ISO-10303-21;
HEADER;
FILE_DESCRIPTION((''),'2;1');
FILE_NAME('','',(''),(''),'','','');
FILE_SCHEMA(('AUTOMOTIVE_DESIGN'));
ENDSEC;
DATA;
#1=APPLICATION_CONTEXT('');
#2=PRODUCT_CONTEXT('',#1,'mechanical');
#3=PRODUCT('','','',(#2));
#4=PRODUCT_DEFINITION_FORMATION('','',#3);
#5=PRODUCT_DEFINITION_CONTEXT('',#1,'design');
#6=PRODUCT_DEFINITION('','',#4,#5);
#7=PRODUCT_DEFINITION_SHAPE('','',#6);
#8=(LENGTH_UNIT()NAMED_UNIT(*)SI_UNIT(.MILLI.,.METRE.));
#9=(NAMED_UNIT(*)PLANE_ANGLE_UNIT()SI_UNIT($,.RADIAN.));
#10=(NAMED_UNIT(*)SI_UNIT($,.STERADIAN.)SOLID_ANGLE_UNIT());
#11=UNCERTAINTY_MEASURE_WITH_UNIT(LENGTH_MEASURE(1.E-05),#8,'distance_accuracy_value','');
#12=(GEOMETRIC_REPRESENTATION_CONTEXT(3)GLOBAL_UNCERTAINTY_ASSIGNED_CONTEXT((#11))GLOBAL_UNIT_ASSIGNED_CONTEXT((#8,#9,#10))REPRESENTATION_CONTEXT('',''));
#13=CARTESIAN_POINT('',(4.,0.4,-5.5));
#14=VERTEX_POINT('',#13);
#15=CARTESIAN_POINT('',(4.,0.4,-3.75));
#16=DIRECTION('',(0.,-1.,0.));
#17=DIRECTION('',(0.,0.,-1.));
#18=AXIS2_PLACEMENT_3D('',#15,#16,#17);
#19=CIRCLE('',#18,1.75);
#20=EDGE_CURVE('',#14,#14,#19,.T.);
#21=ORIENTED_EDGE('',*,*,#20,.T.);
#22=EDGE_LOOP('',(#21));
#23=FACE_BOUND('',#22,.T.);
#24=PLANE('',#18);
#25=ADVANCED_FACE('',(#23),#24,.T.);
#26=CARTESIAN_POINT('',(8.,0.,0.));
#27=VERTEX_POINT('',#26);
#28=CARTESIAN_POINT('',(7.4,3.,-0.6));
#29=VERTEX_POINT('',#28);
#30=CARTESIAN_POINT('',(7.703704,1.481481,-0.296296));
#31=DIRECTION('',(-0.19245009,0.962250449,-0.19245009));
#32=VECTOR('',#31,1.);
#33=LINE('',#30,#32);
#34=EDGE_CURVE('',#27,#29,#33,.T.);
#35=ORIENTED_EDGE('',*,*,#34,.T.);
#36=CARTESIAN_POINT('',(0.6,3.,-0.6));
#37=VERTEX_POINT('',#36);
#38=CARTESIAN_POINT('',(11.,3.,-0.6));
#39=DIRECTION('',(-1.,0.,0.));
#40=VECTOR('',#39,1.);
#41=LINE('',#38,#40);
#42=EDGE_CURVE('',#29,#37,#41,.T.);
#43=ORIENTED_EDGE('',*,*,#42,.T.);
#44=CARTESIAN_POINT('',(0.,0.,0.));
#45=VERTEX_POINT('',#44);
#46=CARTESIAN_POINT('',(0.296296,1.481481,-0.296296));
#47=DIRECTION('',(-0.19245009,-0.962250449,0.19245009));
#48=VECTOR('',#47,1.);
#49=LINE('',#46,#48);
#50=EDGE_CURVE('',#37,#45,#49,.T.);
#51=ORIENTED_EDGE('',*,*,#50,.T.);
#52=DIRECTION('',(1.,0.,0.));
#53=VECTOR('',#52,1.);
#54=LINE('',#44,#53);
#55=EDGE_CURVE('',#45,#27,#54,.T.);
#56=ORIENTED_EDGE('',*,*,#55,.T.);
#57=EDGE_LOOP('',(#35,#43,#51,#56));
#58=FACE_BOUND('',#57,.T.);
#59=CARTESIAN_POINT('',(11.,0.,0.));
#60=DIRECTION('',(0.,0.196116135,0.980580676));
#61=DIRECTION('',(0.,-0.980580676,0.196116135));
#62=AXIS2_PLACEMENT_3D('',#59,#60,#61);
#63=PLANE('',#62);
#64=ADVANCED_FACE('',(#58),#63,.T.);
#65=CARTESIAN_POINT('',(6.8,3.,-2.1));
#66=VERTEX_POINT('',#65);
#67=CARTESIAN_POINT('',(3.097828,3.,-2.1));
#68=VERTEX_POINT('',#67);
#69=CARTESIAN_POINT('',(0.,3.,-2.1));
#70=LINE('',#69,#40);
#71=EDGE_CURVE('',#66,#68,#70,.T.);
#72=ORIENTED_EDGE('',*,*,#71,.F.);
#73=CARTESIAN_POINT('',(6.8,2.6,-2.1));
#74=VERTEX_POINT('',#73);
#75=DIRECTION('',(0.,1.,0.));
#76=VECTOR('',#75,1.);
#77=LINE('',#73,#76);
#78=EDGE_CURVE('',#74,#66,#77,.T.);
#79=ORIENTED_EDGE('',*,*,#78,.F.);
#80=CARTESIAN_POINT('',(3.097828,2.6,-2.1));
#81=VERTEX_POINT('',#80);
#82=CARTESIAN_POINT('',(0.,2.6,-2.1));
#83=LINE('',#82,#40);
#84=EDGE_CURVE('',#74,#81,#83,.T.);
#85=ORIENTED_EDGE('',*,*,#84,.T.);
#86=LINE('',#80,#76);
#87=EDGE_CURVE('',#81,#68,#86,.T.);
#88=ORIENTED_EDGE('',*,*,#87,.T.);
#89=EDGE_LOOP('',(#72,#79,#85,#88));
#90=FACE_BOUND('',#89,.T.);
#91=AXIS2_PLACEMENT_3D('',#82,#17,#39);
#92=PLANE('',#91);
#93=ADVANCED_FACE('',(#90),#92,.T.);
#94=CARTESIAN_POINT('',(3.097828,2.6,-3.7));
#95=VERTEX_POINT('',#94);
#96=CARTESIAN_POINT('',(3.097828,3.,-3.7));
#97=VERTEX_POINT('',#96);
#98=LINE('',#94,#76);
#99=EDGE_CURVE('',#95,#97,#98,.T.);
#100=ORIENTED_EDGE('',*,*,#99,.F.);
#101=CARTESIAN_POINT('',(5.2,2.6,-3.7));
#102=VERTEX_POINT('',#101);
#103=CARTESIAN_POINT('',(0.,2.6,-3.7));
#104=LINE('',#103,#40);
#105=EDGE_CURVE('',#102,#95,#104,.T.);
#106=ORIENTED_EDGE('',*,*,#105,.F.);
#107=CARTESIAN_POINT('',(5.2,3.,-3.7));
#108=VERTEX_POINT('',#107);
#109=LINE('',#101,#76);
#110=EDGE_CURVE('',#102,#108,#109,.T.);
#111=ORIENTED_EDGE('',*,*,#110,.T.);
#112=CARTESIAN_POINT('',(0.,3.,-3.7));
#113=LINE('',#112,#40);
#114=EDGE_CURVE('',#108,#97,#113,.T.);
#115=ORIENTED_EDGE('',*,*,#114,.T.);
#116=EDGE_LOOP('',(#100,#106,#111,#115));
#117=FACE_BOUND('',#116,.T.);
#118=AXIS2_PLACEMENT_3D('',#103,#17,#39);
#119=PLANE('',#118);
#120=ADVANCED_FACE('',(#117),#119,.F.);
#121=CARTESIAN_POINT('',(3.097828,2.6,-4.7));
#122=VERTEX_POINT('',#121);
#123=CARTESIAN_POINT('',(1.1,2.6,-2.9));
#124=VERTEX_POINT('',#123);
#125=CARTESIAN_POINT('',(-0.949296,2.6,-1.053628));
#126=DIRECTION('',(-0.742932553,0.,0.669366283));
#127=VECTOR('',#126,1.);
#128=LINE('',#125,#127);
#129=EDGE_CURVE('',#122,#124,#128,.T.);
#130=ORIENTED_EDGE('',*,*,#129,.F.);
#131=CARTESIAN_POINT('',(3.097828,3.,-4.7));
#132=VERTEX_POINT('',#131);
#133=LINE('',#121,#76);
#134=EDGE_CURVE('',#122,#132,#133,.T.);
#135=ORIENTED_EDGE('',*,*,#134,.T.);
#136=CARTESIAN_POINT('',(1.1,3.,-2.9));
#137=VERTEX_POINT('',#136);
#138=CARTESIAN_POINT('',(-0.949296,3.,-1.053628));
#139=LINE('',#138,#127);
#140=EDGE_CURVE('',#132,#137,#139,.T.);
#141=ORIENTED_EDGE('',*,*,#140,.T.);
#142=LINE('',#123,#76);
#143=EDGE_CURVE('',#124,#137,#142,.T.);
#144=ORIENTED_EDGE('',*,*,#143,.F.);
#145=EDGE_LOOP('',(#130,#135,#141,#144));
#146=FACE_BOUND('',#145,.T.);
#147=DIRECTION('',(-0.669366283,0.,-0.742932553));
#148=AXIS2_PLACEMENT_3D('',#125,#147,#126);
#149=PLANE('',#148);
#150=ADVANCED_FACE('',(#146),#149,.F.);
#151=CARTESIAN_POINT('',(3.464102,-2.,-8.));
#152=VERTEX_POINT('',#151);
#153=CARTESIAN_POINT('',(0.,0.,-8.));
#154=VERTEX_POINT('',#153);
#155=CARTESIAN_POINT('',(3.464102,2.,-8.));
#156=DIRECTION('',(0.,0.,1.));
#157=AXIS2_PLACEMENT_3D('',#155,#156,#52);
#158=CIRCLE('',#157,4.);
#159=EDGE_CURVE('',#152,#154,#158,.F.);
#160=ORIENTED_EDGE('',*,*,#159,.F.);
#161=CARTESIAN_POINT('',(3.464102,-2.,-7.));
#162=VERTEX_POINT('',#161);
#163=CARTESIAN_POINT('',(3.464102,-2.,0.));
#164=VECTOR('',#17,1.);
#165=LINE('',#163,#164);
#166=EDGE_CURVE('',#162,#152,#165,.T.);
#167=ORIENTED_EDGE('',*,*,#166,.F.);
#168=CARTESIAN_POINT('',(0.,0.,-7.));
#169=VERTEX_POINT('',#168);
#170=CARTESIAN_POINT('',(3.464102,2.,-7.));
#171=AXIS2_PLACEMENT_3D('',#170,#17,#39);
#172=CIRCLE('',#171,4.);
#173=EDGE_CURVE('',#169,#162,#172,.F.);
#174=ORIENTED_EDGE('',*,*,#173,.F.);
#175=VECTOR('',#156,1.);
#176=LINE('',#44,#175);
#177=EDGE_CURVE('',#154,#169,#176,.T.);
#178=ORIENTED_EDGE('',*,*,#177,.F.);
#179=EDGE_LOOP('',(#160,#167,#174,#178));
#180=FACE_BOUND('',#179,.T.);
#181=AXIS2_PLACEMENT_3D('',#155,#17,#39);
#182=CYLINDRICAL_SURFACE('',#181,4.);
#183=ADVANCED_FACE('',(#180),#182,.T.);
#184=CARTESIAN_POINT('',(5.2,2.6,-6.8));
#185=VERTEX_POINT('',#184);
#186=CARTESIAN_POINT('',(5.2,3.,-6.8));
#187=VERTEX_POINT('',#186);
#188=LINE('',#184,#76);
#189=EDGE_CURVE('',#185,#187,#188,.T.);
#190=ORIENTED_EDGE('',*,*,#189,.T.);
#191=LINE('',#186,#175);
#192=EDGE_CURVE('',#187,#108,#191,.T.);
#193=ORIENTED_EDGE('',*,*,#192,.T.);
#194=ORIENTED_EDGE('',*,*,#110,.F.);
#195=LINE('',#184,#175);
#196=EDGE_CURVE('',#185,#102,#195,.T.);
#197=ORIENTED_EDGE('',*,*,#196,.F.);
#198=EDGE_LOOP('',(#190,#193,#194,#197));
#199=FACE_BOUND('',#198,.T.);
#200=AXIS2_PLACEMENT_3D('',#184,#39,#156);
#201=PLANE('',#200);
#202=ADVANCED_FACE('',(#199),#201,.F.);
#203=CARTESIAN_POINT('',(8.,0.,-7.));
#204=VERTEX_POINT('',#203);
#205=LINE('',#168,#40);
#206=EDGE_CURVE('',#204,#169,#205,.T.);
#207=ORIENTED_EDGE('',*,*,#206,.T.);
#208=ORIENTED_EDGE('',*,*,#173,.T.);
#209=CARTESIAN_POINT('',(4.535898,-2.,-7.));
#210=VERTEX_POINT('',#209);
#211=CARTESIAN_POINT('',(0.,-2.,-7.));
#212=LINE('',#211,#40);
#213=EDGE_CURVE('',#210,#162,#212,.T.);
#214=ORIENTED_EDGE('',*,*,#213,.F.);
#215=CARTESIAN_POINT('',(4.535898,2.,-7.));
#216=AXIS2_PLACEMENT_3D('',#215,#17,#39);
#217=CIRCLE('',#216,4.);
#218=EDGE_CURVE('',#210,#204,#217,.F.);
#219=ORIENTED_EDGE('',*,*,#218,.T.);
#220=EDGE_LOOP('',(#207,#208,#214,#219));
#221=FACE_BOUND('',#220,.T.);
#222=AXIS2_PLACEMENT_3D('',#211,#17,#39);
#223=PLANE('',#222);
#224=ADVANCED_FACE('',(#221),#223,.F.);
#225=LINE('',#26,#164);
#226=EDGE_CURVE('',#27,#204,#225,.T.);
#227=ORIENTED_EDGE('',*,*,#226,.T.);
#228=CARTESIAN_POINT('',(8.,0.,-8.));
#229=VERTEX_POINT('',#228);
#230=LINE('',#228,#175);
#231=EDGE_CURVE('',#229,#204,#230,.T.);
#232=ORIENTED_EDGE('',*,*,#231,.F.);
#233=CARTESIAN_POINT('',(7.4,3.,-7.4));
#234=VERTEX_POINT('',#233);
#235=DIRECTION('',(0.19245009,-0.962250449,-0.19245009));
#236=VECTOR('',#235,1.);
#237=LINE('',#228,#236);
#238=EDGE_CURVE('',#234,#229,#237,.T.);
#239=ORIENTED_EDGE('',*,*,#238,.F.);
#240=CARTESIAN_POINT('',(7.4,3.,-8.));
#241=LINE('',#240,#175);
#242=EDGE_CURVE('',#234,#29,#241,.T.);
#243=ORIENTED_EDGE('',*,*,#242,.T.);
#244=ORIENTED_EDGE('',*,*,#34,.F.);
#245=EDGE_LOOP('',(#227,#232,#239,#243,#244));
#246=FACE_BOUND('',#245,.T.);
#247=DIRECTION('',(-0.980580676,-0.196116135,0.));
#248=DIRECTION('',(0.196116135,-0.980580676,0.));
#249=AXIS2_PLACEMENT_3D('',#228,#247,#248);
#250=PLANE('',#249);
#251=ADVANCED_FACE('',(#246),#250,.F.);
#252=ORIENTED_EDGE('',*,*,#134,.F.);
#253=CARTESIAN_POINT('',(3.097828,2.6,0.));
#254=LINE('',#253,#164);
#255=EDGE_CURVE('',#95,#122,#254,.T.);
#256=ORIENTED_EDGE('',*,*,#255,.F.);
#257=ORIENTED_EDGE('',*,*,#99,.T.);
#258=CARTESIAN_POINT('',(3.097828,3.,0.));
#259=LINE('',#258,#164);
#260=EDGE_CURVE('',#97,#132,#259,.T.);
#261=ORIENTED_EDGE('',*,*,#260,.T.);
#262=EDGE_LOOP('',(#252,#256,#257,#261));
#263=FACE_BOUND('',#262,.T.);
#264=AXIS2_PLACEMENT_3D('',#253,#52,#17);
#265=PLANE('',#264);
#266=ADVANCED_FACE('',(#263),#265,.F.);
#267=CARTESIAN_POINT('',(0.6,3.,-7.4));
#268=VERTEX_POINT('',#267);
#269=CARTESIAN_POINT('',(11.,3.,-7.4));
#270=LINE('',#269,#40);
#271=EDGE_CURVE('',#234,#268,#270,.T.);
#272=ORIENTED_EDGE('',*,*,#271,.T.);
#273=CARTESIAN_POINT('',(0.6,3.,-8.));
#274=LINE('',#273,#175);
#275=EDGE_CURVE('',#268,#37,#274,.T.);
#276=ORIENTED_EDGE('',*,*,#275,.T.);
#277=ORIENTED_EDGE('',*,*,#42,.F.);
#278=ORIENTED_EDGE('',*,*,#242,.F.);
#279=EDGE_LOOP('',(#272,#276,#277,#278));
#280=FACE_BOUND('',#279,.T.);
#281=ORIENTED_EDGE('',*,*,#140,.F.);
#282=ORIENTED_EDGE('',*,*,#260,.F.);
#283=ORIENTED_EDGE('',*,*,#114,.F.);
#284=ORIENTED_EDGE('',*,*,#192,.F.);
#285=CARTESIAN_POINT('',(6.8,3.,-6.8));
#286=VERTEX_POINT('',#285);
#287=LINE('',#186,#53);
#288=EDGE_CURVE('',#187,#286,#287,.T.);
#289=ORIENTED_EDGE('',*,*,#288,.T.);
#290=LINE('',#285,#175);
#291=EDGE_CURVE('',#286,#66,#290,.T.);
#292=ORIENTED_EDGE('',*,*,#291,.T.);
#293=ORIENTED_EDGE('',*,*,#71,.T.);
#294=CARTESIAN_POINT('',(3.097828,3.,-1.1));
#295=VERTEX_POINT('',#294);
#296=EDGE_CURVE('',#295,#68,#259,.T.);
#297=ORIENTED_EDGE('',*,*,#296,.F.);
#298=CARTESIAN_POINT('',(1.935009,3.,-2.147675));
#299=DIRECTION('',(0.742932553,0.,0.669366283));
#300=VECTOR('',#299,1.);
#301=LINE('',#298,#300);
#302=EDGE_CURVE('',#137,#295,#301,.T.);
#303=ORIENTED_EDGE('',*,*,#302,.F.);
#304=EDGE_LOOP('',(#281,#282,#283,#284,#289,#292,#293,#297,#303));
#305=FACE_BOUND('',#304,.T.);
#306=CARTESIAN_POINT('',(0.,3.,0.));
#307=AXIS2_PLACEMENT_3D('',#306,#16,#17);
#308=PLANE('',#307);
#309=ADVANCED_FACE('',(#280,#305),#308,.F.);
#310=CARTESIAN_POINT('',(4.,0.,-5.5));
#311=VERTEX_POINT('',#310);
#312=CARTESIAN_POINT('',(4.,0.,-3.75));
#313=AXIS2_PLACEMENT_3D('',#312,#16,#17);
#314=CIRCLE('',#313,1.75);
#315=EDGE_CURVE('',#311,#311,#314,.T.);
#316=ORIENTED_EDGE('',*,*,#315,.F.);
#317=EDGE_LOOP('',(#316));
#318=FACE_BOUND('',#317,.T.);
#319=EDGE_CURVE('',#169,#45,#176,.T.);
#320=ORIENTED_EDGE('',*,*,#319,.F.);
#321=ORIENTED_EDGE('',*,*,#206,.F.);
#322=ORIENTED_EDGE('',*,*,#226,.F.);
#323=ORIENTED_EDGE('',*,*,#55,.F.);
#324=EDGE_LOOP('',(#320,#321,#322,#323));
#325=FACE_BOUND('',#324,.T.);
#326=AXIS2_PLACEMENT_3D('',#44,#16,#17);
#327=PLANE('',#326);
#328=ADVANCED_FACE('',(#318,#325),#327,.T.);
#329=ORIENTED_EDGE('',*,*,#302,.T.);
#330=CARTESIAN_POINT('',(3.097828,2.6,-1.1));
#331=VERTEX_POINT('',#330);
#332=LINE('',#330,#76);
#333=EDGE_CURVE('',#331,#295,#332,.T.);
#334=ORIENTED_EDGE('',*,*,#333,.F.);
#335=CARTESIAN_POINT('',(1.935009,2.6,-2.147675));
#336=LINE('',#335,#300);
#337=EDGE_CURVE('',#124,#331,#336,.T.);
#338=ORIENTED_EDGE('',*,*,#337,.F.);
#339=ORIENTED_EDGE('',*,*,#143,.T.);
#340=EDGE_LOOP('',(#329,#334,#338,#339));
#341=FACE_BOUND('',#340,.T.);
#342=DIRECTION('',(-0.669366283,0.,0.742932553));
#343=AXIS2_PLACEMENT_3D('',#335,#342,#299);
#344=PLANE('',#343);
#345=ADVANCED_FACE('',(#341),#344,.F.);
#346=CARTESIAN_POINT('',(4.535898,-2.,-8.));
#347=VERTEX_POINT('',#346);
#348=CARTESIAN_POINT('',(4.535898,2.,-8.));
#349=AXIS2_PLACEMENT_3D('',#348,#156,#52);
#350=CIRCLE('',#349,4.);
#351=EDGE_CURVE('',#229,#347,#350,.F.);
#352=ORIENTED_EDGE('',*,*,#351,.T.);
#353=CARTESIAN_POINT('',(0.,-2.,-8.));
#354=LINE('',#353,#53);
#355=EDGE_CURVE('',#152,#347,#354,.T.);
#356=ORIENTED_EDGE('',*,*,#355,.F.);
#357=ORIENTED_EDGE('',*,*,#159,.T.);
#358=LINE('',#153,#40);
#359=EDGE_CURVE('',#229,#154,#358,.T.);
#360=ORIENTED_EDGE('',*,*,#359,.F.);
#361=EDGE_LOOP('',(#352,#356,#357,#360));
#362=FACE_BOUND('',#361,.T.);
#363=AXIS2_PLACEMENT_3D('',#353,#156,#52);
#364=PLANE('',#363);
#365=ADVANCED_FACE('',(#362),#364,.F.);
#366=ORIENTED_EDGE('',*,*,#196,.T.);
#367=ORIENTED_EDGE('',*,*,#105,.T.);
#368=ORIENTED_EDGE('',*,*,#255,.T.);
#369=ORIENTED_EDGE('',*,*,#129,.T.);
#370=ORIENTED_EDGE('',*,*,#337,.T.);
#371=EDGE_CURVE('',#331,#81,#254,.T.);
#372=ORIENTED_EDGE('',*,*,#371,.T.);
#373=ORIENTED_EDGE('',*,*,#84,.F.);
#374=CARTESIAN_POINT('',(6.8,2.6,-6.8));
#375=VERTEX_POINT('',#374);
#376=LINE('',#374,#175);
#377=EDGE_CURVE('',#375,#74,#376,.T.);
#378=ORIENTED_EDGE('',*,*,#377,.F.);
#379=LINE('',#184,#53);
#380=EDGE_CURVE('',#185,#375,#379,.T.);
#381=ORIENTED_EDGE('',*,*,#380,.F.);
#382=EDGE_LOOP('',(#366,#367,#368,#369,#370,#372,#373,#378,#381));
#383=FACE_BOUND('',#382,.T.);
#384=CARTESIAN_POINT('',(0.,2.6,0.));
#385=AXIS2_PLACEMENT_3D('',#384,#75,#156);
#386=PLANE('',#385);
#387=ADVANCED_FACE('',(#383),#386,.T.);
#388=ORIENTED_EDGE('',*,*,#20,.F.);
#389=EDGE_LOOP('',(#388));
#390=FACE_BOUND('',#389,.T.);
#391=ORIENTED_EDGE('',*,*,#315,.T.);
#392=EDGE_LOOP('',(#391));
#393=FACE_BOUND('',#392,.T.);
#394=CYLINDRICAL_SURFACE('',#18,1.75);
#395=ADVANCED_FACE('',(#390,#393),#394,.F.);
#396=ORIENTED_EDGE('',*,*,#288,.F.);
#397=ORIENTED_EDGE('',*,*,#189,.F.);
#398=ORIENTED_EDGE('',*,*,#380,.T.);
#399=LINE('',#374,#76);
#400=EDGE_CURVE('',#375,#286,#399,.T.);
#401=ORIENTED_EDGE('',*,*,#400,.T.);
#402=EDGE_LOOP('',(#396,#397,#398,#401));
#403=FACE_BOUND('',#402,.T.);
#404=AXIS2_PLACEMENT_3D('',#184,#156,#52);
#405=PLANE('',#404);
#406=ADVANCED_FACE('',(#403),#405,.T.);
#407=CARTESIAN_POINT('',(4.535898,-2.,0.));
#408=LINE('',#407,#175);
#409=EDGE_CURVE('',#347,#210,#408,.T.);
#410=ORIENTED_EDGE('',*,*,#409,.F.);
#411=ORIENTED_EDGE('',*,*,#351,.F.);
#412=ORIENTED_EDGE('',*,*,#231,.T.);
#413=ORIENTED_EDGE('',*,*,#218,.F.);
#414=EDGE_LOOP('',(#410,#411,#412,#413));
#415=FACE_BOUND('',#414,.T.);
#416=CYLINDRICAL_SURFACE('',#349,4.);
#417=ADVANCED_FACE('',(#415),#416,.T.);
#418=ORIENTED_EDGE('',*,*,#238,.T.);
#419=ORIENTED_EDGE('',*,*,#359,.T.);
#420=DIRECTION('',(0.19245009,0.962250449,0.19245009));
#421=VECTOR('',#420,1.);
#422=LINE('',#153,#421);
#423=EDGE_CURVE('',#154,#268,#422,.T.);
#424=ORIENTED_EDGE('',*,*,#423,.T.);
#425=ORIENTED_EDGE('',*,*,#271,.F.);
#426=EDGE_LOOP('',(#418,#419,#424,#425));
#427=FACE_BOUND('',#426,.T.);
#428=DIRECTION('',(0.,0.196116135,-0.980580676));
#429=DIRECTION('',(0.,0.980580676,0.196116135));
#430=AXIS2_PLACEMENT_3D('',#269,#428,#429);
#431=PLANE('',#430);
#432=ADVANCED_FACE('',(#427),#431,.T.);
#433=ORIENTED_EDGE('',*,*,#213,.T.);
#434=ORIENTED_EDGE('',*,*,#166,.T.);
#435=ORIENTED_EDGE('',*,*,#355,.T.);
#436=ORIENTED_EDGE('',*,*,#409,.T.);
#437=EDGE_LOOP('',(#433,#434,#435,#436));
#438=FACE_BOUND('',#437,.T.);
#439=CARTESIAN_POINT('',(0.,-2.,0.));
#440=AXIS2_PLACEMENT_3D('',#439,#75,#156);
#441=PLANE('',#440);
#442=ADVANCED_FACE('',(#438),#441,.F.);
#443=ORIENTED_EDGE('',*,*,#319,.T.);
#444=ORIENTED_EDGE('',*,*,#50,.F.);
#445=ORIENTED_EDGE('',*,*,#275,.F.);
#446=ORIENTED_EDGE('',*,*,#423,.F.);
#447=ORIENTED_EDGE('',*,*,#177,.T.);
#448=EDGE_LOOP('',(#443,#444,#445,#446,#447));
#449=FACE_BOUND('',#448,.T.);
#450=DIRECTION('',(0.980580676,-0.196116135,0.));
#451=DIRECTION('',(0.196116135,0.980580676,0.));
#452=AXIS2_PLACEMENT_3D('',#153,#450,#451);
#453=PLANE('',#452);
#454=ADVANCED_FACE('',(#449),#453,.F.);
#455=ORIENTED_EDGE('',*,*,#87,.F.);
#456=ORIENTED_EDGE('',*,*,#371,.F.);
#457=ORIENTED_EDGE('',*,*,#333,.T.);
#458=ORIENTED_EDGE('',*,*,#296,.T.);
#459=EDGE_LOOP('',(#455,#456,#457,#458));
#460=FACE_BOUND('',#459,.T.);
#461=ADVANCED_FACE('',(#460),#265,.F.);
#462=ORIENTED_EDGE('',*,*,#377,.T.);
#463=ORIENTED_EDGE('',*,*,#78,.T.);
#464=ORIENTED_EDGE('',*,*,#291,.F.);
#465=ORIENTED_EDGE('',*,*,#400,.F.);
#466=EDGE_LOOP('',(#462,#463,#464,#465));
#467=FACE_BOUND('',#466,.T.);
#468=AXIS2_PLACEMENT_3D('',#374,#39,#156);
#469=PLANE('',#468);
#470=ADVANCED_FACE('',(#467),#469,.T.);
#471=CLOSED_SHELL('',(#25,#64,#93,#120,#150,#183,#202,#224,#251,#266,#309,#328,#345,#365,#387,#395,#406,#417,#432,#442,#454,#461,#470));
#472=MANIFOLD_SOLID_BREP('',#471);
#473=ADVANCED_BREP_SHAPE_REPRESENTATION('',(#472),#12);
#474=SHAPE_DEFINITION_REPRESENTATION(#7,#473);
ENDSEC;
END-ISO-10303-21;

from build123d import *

# Parameters (mm, degrees)
SKETCH1_W               = 8
SKETCH1_H               = 8
BOSS_EXTRUDE1_DEPTH     = 3
CUT_EXTRUDE1_DEPTH      = 12.704699911
CUT_EXTRUDE1_DEPTH_BACK = 12.704699911
CUT_EXTRUDE2_DEPTH      = 11
SKETCH4_R               = 1.75
CUT_EXTRUDE3_DEPTH      = 0.4
SKETCH5_W               = 8
SKETCH5_H               = 1
BOSS_EXTRUDE2_DEPTH     = 2
FILLET1_R               = 4
SKETCH6_W               = 2.10217216
SKETCH6_H               = 1.6
CUT_EXTRUDE4_DEPTH      = 0.4


with BuildPart() as part:
    # Sketch1 → Boss-Extrude1 (new body)
    with BuildSketch(Plane(origin=(0, 0, 0), x_dir=(1, 0, 0), z_dir=(0, 1, 0))):
        with Locations((4, 4)):
            Rectangle(SKETCH1_W, SKETCH1_H)
    extrude(amount=BOSS_EXTRUDE1_DEPTH)

    # Sketch2 → Cut-Extrude1 (cut, two sides: drawn at the far end of the back side and taken through both)
    with BuildSketch(Plane.XY.offset(-CUT_EXTRUDE1_DEPTH_BACK)):
        Polygon((0, 0), (0.6, 3), (0, 3), align=None)
        Polygon((8, 0), (7.4, 3), (8, 3), align=None)
    extrude(amount=CUT_EXTRUDE1_DEPTH + CUT_EXTRUDE1_DEPTH_BACK, mode=Mode.SUBTRACT)

    # Sketch3 → Cut-Extrude2 (cut)
    with BuildSketch(Plane(origin=(0, 0, 0), x_dir=(0, 0, -1), z_dir=(1, 0, 0))):
        Polygon((0, 0), (0.6, 3), (0, 3), align=None)
        Polygon((8, 3), (7.4, 3), (8, 0), align=None)
    extrude(amount=CUT_EXTRUDE2_DEPTH, mode=Mode.SUBTRACT)

    # Sketch4 → Cut-Extrude3 (cut)
    with BuildSketch(Plane.XZ):
        with Locations(Location((4, -3.75, 0), (0, 0, 270))):
            Circle(SKETCH4_R)
    extrude(amount=-CUT_EXTRUDE3_DEPTH, mode=Mode.SUBTRACT)

    # Sketch5 → Boss-Extrude2 (add)
    with BuildSketch(Plane.XZ):
        with Locations((4, -7.5)):
            Rectangle(SKETCH5_W, SKETCH5_H)
    extrude(amount=BOSS_EXTRUDE2_DEPTH)

    # Fillet1
    # the kernel refuses this fillet: 4 mm, written as the material it takes off along each edge
    with BuildSketch(Plane(origin=(8, -2, -16.660254038), x_dir=(0, 1, 0), z_dir=(0, 0, 1)), Plane(origin=(0, -2, 1.660254038), x_dir=(0, 1, 0), z_dir=(0, 0, -1))) as fillet1_piece_1:
        with BuildLine():
            CenterArc((4, 3.464101615), FILLET1_R, 180, 60)
            Line((0, 3.464101615), (-0.08, 3.464101615))
            Line((-0.08, 3.464101615), (-0.08, 0))
            Line((-0.08, 0), (0, -0.08))
            ThreePointArc((0, -0.08), (1, -0.08), (1.96, -0.069282032))
            Line((1.96, -0.069282032), (2, 0))
        make_face()
    extrude(amount=18.320508076, mode=Mode.SUBTRACT)

    # Sketch6 → Cut-Extrude4 (cut)
    with BuildSketch(Plane(origin=(0, 3, 0), x_dir=(1, 0, 0), z_dir=(0, 1, 0))):
        Polygon((3.09782784, 2.1), (3.09782784, 3.7), (3.09782784, 4.7), (1.1, 2.9), (3.09782784, 1.1), align=None)
        with Locations((4.14891392, 2.9)):
            Rectangle(SKETCH6_W, SKETCH6_H)
        Polygon((5.2, 6.8), (5.2, 3.7), (5.2, 2.1), (6.8, 2.1), (6.8, 6.8), align=None)
    extrude(amount=-CUT_EXTRUDE4_DEPTH, mode=Mode.SUBTRACT)


solid = part.part
